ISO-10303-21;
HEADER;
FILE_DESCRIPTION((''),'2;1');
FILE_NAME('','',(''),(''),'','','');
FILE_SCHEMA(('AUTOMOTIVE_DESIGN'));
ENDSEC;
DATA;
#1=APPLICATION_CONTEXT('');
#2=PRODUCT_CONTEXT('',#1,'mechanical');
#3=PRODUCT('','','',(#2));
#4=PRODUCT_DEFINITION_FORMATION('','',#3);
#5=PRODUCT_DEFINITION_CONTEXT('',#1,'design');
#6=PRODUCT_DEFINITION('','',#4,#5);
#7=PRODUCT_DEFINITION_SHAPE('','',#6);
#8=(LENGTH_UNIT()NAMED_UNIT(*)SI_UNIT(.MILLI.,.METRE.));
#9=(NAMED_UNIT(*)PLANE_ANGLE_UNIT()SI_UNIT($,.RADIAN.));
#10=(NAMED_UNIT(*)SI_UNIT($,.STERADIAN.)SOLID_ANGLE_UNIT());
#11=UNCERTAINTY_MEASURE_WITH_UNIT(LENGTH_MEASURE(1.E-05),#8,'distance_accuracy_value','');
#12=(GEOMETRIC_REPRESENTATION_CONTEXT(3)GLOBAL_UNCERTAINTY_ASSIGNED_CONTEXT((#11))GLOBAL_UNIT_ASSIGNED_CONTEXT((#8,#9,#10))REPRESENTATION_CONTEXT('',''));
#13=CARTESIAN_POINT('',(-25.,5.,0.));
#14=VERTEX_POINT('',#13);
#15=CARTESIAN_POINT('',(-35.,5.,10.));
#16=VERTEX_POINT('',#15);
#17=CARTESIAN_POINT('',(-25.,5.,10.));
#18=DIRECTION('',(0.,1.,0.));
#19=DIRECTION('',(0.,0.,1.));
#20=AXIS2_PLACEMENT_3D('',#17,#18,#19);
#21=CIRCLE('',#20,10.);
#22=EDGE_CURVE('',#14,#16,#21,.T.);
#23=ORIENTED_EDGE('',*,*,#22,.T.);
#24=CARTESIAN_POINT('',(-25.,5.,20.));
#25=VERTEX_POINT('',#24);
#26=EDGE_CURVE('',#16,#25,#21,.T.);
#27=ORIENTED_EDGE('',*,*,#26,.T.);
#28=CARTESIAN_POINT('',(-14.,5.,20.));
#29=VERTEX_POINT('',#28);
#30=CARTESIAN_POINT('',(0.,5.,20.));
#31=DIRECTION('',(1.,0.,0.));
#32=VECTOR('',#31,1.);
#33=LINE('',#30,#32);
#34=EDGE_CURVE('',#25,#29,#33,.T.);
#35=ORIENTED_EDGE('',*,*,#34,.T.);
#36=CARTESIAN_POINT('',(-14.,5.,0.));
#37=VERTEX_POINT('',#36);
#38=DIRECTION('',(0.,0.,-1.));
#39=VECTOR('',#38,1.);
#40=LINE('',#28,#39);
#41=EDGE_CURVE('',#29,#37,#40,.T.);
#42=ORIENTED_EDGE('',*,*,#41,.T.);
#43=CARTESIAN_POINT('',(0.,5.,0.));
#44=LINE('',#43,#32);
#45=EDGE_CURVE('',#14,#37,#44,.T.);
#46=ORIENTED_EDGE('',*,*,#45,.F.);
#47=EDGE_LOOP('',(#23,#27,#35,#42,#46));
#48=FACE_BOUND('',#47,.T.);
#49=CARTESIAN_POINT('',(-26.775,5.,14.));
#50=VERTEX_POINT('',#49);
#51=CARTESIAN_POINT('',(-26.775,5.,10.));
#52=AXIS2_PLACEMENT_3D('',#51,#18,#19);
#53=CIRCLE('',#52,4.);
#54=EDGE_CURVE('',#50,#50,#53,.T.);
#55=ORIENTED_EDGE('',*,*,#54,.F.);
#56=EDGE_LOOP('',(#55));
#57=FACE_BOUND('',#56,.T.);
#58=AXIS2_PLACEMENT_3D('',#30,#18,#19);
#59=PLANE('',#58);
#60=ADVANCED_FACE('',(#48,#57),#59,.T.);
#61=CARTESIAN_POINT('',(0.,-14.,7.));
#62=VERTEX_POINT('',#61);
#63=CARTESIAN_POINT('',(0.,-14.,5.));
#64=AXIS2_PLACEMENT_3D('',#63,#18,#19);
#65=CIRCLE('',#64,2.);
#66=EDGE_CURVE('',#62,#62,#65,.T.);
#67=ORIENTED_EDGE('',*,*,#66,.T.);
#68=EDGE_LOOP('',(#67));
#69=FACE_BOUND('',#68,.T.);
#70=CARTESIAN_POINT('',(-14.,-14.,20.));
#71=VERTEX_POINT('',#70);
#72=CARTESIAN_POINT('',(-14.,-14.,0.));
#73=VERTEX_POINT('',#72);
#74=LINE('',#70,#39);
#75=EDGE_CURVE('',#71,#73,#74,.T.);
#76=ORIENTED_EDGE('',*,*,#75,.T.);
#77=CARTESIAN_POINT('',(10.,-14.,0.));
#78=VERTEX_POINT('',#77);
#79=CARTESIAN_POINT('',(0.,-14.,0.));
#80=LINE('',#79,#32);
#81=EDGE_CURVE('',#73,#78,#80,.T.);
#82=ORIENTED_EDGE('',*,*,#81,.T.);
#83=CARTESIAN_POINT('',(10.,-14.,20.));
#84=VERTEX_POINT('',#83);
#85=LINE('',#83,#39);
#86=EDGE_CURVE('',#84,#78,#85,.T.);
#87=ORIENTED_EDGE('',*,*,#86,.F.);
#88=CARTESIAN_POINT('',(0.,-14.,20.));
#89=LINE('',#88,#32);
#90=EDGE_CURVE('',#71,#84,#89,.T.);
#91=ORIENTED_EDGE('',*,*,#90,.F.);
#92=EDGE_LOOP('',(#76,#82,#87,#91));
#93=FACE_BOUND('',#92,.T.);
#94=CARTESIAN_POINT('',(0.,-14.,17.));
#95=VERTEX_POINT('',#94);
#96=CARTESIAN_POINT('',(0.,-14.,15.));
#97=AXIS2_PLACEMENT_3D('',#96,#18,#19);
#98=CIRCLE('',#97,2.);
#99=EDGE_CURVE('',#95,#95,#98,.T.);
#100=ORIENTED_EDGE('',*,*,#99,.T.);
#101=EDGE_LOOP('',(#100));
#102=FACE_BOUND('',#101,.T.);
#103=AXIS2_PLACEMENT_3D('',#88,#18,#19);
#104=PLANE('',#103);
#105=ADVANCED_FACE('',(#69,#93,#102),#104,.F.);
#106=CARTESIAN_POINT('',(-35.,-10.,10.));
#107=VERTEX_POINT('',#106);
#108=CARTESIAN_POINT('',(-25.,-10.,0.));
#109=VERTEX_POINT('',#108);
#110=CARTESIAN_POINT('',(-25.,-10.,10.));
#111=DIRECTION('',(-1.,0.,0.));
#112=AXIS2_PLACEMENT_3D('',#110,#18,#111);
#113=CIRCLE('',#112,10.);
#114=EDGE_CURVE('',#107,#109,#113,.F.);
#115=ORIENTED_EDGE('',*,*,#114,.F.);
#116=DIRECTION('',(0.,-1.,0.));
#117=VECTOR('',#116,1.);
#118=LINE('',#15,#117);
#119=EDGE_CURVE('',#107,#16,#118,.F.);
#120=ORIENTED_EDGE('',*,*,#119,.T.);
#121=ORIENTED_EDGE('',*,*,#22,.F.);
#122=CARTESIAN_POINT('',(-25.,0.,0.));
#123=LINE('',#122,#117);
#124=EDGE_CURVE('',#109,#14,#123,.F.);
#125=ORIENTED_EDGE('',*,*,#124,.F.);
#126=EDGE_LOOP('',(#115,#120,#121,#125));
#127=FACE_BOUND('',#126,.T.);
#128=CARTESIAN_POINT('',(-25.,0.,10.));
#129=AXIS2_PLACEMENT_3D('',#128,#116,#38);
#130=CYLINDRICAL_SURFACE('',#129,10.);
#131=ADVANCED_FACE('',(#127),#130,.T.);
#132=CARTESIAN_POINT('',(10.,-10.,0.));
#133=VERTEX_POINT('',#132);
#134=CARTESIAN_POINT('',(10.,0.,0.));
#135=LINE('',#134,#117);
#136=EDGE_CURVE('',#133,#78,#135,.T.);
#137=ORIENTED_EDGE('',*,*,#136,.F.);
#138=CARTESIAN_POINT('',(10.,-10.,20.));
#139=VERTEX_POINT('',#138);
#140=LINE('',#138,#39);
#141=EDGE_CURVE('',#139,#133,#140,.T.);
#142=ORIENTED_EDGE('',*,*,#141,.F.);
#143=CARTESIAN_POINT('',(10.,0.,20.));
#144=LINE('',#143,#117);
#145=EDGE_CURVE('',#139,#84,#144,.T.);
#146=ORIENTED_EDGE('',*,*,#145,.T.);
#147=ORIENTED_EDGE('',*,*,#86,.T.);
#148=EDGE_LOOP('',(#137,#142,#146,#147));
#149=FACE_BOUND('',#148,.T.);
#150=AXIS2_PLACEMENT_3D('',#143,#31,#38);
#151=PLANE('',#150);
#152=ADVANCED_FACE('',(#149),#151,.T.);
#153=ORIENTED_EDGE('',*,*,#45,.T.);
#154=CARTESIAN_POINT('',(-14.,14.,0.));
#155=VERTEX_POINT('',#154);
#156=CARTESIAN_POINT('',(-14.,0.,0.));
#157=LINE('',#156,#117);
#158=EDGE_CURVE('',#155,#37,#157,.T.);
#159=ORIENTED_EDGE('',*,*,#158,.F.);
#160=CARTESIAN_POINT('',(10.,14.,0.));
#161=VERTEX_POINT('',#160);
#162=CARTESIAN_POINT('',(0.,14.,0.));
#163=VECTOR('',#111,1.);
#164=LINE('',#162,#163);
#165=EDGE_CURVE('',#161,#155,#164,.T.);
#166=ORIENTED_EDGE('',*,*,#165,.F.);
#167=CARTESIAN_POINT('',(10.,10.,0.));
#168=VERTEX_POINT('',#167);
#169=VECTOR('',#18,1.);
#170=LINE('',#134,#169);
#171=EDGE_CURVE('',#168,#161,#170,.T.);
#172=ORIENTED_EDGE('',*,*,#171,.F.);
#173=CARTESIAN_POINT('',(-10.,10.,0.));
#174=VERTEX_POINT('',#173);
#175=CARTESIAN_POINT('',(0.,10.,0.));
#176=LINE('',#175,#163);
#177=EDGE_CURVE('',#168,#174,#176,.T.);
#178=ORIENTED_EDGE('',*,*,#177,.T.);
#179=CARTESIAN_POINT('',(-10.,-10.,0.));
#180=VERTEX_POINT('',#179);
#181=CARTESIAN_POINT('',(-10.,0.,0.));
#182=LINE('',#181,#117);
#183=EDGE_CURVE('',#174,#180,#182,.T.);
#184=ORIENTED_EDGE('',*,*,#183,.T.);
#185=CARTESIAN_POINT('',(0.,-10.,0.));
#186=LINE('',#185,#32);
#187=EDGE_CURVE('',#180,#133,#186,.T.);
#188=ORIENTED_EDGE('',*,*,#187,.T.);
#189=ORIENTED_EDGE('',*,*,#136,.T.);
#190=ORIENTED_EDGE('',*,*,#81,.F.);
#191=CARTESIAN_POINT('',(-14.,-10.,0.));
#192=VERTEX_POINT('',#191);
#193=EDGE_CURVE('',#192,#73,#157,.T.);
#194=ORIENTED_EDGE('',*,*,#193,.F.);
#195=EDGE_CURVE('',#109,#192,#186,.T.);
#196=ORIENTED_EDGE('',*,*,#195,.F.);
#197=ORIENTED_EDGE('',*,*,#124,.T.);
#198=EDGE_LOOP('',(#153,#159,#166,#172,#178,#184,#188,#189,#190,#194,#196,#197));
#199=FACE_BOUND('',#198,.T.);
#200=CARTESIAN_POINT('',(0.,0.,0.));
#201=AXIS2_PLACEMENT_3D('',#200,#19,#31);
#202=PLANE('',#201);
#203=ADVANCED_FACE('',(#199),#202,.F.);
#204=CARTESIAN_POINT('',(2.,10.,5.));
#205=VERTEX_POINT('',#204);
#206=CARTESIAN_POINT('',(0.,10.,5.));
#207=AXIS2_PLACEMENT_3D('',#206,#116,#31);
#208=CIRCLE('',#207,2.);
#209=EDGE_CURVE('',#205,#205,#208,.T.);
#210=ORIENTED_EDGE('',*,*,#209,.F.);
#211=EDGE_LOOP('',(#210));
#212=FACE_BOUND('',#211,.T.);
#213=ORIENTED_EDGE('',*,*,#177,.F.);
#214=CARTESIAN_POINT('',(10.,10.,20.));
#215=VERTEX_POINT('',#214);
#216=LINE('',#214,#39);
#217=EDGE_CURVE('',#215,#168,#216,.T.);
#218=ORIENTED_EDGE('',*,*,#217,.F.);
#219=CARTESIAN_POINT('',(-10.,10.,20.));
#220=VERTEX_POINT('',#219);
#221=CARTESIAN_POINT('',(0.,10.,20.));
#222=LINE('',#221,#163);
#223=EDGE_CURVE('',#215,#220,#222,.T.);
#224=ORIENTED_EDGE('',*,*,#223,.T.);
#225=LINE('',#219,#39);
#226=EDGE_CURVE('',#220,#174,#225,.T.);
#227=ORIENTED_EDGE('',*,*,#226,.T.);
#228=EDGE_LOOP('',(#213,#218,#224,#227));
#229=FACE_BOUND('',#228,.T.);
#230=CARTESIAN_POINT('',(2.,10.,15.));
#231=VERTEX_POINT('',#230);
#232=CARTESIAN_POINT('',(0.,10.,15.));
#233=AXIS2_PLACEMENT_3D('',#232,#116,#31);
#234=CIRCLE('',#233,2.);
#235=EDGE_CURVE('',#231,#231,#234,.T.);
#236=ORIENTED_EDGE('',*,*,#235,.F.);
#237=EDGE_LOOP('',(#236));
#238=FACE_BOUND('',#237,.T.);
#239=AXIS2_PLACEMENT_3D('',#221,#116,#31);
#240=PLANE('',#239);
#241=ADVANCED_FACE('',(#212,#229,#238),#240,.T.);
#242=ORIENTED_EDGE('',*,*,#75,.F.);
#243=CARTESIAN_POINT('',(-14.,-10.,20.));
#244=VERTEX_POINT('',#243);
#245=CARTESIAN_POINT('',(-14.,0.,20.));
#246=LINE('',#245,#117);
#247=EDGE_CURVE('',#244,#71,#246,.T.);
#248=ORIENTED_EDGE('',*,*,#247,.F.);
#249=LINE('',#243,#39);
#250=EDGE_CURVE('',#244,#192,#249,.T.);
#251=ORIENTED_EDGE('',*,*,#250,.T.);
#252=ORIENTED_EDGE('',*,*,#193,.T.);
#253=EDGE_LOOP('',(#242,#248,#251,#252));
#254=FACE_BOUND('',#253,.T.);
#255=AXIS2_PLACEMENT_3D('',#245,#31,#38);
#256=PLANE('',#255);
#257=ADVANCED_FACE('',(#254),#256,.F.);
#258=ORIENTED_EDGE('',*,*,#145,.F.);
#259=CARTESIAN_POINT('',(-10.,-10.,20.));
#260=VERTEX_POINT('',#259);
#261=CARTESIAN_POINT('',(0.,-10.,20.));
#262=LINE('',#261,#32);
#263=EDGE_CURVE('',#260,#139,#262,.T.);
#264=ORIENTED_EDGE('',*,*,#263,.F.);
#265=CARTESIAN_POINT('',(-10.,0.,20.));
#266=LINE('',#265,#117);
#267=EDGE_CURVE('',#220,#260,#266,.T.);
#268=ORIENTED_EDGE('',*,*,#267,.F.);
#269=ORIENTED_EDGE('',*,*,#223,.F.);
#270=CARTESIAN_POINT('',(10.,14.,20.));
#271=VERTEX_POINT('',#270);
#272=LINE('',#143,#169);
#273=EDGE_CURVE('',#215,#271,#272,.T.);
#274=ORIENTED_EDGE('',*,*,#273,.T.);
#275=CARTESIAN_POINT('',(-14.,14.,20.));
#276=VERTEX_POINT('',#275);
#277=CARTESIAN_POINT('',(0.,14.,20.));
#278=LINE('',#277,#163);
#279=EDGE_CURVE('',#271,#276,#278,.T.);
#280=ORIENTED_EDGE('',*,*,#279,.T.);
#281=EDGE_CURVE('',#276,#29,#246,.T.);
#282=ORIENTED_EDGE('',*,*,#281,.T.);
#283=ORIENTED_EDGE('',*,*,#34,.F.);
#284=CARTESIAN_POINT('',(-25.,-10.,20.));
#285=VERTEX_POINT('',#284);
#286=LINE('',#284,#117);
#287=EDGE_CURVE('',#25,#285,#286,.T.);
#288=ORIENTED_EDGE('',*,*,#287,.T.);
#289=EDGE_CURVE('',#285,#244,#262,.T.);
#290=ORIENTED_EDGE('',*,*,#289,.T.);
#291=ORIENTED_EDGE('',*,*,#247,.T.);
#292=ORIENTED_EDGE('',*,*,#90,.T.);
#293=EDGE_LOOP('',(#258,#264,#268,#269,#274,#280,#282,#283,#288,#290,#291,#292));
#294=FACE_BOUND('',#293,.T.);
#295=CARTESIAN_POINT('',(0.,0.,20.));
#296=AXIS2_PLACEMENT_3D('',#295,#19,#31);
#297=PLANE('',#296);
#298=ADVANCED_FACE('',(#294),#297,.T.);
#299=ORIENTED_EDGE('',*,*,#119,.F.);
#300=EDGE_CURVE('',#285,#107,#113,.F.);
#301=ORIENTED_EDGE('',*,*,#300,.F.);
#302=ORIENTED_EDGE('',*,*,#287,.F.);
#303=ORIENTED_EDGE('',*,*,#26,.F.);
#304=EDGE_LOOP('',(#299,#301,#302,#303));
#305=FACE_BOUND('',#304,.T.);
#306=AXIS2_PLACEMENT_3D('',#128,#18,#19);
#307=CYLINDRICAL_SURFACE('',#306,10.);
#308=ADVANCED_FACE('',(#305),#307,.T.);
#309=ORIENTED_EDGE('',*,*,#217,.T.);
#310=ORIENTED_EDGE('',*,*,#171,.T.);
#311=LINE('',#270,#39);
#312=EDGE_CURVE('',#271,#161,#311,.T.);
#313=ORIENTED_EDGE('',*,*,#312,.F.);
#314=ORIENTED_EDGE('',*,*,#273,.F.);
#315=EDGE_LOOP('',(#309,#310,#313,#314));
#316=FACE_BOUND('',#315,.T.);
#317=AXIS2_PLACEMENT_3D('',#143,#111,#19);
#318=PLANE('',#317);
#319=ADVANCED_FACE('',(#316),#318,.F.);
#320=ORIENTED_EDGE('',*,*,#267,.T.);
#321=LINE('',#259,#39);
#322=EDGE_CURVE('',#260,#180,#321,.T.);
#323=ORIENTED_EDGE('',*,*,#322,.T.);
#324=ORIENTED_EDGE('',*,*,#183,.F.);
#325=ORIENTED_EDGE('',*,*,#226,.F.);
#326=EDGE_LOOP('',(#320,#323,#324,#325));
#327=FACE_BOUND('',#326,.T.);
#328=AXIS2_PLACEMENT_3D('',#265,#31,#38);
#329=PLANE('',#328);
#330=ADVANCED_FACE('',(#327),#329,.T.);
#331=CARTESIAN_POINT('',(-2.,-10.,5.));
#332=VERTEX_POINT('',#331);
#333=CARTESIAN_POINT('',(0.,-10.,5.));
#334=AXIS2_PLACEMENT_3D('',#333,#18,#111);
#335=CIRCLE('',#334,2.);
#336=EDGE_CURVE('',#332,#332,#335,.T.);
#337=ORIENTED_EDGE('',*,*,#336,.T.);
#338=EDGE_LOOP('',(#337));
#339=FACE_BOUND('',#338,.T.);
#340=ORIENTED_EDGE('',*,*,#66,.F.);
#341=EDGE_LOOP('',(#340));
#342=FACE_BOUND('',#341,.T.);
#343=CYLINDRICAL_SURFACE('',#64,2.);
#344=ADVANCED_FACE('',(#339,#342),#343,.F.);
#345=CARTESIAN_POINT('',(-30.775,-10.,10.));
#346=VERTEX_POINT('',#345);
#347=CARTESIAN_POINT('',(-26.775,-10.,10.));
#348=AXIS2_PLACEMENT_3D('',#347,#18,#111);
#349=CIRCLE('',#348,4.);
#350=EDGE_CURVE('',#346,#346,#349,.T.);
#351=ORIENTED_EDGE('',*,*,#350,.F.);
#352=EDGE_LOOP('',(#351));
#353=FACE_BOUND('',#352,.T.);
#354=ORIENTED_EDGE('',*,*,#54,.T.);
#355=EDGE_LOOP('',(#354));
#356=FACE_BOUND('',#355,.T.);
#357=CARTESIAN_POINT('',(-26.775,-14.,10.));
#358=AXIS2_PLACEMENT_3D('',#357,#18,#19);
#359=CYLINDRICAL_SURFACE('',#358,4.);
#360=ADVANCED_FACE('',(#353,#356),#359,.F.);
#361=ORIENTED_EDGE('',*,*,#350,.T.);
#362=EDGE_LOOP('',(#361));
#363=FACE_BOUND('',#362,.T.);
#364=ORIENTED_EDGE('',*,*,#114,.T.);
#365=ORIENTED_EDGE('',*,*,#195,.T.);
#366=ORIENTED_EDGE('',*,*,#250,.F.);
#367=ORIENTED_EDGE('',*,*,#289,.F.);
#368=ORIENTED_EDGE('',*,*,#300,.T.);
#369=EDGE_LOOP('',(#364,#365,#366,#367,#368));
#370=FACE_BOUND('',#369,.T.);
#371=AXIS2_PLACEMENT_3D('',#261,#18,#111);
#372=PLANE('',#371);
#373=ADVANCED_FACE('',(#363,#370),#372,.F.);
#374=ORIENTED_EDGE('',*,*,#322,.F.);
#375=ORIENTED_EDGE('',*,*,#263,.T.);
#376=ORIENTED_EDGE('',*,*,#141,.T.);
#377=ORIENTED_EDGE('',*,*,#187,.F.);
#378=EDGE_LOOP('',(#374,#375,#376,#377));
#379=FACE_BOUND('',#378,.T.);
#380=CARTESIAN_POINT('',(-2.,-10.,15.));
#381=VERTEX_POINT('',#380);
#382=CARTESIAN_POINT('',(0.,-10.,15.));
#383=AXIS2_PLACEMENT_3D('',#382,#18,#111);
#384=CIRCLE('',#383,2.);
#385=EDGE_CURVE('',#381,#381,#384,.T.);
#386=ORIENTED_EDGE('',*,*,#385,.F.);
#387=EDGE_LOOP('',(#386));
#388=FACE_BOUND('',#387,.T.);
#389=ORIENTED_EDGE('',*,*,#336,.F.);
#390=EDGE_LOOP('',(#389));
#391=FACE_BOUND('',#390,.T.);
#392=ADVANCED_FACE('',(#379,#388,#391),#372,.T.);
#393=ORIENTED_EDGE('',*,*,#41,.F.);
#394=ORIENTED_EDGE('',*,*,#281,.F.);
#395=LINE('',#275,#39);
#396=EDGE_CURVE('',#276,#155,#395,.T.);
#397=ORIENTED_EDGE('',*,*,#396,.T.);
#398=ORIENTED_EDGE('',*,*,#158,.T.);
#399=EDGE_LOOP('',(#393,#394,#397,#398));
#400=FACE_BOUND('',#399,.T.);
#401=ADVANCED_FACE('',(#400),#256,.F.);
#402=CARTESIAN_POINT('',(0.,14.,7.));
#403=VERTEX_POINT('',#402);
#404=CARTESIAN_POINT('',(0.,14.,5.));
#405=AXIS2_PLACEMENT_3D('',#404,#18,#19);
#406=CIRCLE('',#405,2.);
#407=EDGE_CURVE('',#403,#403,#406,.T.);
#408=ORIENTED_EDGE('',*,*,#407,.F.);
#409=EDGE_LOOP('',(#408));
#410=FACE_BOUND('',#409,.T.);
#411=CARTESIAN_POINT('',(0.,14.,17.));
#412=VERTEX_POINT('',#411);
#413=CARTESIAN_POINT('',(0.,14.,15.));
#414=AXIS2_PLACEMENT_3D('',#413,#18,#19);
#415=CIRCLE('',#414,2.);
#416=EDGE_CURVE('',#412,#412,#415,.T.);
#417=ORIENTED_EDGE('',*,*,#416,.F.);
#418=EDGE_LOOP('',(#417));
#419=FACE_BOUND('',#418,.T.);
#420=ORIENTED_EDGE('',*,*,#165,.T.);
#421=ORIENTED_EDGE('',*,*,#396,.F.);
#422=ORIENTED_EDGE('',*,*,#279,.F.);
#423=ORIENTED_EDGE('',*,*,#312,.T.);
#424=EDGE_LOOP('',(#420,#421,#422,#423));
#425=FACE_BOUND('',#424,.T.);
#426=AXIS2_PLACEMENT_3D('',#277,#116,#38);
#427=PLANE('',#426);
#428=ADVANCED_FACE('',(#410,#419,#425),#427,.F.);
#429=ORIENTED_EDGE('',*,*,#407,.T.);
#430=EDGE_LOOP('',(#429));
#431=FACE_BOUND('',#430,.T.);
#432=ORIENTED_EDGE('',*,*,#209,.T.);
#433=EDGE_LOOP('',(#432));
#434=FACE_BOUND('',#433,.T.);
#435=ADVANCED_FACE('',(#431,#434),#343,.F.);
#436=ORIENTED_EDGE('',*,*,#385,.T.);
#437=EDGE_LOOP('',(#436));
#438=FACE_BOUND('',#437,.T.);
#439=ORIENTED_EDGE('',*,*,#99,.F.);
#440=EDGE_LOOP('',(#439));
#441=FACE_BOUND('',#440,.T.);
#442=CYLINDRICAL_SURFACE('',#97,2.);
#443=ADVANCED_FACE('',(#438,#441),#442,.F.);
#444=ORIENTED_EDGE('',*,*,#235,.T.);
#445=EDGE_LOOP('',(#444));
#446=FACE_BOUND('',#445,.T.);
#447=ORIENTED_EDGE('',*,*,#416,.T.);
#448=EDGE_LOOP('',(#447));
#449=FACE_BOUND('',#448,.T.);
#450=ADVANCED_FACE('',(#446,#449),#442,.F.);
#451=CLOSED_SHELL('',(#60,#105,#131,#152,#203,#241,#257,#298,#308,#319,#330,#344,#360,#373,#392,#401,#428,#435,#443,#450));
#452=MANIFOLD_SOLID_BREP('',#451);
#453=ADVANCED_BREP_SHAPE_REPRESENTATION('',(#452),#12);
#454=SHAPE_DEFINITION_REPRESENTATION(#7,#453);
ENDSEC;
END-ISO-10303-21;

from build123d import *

# Parameters (mm, degrees)
SKETCH1_W               = 25
SKETCH1_H               = 15
SKETCH1_W_2             = 20
SKETCH1_H_2             = 4
BOSS_EXTRUDE1_DEPTH     = 20
SKETCH2_R               = 4
CUT_EXTRUDE2_DEPTH      = 45.56455991
CUT_EXTRUDE3_DEPTH      = 45.56455991
CUT_EXTRUDE3_DEPTH_BACK = 45.56455991
SKETCH3_R               = 2
FILLET4_R               = 10


with BuildPart() as part:
    # Sketch1 → Boss-Extrude1 (new body)
    with BuildSketch(Plane.XY):
        with Locations((-22.5, -2.5)):
            Rectangle(SKETCH1_W, SKETCH1_H)
        Polygon((-14, 14), (-14, 5), (-10, 5), (-10, 10), (-10, 14), align=None)
        with Locations((0, 12)):
            Rectangle(SKETCH1_W_2, SKETCH1_H_2)
        Polygon((-10, -10), (-14, -10), (-14, -14), (10, -14), (10, -10), align=None)
    extrude(amount=BOSS_EXTRUDE1_DEPTH)

    # Sketch2 → Cut-Extrude2 (cut, through all)
    with BuildSketch(Plane(origin=(0, 5, 0), x_dir=(1, 0, 0), z_dir=(0, 1, 0))):
        with Locations(Location((-26.775, -10, 0), (0, 0, 270))):
            Circle(SKETCH2_R)
    extrude(amount=-CUT_EXTRUDE2_DEPTH, mode=Mode.SUBTRACT)

    # Sketch3 → Cut-Extrude3 (cut, two sides: drawn at the far end of the back side and taken through both)
    with BuildSketch(Plane(origin=(0, 5, 0), x_dir=(1, 0, 0), z_dir=(0, 1, 0)).offset(-CUT_EXTRUDE3_DEPTH_BACK)):
        with Locations(Location((0, -5, 0), (0, 0, 270))):
            Circle(SKETCH3_R)
        with Locations(Location((0, -15, 0), (0, 0, 270))):
            Circle(SKETCH3_R)
    extrude(amount=CUT_EXTRUDE3_DEPTH + CUT_EXTRUDE3_DEPTH_BACK, mode=Mode.SUBTRACT)

    # Fillet4
    fillet4_edges = [part.edges().sort_by_distance(p)[0] for p in [
        (-35, -2.5, 0),
        (-35, -2.5, 20),
    ]]
    fillet(fillet4_edges, radius=FILLET4_R - 0.0001)  # a hair under: the kernel refuses the full size


solid = part.part
